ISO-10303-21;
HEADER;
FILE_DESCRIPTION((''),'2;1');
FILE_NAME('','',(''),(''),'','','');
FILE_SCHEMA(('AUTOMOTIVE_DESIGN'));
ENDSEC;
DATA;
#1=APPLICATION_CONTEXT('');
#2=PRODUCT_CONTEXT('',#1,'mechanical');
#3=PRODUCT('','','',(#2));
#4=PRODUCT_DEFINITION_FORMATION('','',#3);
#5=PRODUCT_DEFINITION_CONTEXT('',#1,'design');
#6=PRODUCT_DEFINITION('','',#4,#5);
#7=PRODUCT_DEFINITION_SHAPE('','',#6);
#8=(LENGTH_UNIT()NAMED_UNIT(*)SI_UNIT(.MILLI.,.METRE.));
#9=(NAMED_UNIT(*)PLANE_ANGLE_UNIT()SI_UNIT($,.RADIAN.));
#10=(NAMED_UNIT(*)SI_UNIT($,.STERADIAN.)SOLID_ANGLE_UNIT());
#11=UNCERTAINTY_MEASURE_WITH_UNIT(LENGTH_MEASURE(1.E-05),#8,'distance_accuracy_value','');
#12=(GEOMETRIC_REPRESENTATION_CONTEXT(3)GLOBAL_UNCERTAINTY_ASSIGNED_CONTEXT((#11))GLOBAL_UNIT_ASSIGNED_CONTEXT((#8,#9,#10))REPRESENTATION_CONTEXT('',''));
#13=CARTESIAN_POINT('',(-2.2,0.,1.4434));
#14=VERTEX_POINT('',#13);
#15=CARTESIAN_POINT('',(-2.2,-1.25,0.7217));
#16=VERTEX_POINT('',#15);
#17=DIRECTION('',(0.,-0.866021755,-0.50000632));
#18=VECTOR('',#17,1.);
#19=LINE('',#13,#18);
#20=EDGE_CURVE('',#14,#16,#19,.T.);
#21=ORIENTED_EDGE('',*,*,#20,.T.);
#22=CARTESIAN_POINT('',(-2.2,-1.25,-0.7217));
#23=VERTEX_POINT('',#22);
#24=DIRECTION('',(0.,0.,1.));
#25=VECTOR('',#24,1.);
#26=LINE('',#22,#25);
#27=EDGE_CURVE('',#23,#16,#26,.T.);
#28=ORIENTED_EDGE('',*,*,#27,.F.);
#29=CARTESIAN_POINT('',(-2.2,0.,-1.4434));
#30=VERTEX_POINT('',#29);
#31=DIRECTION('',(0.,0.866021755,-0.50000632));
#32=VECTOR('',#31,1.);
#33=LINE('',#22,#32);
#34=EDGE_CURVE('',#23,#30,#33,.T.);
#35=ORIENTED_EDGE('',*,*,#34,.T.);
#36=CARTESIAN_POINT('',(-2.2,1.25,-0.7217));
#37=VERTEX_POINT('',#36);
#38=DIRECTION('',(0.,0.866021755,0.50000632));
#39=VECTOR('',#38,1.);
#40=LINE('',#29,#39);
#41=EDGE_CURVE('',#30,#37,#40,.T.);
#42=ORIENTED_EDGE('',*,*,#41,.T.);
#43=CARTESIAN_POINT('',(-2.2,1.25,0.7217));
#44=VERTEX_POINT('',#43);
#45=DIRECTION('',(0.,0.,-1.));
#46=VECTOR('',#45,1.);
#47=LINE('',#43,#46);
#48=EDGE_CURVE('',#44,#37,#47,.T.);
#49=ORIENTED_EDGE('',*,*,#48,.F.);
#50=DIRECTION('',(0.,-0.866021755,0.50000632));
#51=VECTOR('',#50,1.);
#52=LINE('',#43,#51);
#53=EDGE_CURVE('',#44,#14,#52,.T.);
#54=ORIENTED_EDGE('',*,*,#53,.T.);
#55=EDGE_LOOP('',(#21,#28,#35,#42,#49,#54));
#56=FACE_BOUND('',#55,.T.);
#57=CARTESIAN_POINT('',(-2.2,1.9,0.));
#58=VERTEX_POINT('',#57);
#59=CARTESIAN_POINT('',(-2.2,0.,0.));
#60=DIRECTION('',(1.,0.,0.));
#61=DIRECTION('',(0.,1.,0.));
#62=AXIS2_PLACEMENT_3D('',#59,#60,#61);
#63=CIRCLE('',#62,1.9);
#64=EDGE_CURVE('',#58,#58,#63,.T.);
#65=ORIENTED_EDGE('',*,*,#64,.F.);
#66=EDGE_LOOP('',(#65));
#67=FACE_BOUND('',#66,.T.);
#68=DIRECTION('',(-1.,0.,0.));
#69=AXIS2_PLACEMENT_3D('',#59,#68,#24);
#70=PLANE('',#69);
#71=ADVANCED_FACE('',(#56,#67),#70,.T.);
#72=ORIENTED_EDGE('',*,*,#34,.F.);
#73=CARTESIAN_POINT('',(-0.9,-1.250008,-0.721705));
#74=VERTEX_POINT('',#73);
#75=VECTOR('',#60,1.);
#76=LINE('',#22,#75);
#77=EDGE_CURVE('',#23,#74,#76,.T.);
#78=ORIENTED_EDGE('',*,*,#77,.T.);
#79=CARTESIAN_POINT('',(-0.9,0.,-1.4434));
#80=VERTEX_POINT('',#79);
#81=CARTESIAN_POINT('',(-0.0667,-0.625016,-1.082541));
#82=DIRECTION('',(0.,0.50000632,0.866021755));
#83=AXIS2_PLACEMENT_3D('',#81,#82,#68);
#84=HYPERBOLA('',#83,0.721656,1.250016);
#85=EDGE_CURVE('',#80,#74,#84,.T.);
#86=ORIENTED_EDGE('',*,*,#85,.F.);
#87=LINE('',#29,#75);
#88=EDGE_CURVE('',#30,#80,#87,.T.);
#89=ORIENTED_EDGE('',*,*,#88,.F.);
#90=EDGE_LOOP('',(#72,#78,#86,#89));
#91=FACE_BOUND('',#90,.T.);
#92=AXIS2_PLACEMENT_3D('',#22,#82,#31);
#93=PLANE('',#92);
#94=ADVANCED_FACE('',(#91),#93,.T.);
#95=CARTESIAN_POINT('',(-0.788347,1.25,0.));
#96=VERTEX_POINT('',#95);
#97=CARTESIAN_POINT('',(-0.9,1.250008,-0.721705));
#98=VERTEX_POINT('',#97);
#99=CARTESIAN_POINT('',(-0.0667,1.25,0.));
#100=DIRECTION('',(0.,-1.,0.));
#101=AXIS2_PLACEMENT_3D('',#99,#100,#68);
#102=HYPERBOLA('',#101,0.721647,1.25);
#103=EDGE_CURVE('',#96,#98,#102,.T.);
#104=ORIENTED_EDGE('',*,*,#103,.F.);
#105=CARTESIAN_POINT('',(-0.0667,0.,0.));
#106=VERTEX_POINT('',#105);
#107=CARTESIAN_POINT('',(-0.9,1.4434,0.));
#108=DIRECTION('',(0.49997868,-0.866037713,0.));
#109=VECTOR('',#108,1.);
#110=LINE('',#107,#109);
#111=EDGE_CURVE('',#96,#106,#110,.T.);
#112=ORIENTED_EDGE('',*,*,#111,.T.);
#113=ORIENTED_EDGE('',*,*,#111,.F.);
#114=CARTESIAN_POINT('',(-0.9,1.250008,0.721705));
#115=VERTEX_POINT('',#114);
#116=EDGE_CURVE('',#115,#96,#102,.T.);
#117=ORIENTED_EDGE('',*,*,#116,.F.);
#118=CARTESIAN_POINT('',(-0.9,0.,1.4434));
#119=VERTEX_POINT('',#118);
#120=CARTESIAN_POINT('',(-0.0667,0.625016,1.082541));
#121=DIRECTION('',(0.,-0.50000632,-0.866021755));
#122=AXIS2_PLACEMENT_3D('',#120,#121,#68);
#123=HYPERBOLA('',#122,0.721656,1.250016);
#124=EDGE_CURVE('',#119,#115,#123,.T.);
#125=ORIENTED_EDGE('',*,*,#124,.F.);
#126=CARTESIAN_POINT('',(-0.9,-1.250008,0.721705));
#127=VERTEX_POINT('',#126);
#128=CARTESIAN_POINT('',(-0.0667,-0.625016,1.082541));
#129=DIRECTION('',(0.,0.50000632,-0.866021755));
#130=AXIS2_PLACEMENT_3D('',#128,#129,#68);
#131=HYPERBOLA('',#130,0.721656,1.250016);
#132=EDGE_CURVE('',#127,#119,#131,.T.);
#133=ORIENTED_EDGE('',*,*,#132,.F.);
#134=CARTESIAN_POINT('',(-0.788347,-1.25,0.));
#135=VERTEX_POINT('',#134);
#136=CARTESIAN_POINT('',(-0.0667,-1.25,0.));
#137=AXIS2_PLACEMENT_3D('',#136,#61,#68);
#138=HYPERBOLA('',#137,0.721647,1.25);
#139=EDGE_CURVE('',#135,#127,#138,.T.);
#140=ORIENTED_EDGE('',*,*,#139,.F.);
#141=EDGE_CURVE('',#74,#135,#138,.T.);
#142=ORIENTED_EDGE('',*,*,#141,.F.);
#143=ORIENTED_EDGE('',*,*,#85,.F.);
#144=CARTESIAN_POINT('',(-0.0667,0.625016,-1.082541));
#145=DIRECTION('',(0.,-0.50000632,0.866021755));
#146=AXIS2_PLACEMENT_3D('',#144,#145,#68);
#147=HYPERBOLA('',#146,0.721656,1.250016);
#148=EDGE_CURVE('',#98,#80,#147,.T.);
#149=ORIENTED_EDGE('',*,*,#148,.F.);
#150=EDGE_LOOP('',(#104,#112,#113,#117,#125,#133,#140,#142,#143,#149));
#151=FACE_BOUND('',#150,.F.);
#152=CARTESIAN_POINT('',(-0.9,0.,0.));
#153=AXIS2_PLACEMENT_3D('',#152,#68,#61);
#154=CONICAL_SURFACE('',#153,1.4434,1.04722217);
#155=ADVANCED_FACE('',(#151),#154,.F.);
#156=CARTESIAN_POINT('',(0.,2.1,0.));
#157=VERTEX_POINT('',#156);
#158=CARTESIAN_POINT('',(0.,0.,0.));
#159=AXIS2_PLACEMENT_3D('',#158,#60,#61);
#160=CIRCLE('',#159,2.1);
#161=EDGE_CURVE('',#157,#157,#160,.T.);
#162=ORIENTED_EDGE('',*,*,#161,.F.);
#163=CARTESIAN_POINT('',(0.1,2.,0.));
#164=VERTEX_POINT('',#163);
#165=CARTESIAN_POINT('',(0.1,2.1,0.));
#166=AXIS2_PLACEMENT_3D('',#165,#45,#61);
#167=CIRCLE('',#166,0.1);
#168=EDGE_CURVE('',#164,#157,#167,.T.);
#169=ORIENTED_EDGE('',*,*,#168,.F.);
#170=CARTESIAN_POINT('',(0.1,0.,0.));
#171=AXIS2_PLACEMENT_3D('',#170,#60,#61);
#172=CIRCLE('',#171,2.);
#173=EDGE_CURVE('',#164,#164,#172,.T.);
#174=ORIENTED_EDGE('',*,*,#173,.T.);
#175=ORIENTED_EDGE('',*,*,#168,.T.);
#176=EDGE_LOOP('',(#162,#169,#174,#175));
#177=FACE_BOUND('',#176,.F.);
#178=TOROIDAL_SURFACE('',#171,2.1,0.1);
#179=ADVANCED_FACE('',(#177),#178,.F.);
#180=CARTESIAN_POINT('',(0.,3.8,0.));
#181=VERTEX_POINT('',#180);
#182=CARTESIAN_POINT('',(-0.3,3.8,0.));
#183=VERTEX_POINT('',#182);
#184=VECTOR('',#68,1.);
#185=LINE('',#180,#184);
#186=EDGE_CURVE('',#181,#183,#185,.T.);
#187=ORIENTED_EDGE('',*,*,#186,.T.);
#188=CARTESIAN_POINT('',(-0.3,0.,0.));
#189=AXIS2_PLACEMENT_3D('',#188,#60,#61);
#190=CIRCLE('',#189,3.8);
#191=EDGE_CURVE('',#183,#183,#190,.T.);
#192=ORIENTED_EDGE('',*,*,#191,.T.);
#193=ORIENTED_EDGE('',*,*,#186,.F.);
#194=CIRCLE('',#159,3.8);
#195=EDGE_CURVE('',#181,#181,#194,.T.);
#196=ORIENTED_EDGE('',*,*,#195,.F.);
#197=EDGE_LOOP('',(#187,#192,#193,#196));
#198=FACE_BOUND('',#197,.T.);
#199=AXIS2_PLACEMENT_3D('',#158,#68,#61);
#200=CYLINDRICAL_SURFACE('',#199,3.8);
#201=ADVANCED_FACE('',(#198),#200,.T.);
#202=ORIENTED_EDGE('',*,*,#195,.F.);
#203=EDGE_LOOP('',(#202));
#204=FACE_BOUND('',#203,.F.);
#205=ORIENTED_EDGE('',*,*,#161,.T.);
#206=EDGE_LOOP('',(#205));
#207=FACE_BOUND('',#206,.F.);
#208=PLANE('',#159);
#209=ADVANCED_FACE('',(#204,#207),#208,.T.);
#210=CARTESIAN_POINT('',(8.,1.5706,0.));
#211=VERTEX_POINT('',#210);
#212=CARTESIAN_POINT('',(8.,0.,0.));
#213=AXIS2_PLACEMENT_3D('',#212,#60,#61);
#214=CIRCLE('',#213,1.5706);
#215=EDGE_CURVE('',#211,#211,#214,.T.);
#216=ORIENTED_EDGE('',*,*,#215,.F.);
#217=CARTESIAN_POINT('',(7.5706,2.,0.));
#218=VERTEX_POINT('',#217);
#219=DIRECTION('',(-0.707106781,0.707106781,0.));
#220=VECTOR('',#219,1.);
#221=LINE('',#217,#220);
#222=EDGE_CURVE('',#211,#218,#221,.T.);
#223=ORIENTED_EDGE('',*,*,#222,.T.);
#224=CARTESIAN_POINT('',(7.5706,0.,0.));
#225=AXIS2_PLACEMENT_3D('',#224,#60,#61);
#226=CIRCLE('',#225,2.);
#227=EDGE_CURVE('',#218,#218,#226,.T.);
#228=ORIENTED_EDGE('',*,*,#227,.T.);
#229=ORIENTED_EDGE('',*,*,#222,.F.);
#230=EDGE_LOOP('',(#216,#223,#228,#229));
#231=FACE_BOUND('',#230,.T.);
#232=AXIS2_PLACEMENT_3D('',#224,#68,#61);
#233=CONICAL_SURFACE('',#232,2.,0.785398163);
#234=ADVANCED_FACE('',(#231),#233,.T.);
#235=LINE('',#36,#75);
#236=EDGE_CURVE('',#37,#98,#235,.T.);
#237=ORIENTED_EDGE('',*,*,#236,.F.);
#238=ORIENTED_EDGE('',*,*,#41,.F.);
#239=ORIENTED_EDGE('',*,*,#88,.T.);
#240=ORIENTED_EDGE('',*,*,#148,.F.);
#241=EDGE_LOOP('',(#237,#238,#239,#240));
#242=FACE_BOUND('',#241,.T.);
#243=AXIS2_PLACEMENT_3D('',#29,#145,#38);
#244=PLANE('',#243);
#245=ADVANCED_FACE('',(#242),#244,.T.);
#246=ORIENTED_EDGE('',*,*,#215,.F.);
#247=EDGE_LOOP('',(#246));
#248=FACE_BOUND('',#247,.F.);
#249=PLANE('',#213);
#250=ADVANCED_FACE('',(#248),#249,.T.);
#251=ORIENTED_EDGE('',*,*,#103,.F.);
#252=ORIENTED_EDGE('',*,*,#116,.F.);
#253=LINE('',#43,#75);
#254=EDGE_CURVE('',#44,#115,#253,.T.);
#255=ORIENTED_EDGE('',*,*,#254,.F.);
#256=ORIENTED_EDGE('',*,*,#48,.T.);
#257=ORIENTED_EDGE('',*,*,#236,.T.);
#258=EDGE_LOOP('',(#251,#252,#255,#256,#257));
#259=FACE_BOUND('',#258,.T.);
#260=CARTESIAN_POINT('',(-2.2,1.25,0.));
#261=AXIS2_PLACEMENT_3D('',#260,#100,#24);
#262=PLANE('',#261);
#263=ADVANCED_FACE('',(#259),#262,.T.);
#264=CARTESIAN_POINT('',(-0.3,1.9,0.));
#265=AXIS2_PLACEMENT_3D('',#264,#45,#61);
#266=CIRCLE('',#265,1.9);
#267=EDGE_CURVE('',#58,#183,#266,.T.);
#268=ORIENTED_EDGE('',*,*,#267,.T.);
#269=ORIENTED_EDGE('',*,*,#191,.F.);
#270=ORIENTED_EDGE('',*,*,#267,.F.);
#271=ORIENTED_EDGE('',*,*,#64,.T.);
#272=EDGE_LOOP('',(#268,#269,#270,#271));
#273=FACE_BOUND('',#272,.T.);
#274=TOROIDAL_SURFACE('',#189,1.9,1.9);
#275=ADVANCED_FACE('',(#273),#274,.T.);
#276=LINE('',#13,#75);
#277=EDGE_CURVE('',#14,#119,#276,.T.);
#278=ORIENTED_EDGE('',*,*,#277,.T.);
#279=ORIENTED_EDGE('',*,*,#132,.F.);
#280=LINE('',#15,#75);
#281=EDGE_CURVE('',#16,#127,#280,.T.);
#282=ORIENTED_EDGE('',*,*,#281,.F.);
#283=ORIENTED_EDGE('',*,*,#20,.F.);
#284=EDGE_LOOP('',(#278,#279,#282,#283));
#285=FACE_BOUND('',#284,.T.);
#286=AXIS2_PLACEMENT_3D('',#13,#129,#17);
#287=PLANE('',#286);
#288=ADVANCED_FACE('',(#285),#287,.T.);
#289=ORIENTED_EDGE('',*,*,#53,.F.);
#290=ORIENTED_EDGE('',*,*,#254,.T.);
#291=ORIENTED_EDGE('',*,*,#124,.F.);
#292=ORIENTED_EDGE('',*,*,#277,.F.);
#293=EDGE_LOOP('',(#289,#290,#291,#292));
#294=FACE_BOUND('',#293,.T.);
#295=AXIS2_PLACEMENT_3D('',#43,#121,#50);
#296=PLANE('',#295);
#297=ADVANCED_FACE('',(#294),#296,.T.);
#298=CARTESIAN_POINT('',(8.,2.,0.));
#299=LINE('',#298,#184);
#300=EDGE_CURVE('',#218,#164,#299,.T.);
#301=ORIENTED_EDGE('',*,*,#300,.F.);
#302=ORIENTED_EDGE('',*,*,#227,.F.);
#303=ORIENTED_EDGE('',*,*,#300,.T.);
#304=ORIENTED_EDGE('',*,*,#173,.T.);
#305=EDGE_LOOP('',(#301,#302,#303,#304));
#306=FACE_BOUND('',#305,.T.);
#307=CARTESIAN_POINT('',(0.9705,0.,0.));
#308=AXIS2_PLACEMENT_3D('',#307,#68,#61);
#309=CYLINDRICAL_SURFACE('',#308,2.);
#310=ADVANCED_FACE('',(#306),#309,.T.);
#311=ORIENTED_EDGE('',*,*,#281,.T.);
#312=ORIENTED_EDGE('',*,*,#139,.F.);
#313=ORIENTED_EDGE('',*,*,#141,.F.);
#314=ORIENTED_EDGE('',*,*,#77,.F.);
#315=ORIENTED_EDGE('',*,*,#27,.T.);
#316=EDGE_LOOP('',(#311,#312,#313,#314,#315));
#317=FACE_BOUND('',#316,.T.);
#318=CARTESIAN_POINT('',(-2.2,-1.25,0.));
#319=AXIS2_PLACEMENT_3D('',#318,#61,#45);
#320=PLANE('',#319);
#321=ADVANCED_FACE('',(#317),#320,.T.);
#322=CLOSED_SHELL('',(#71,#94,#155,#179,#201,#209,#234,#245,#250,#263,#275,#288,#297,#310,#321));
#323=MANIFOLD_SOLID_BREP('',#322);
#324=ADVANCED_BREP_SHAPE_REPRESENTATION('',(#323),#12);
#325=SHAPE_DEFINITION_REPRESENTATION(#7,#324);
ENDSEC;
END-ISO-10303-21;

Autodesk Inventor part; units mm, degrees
ref_plane "YZ Plane" through (0, 0, 0) normal (1, 0, 0) x (0, 1, 0)
ref_plane "XZ Plane" through (0, 0, 0) normal (0, 1, 0) x (-1, 0, 0)
sketch "Sketch1" plane through (0, 0, 0) normal (0, 0, 1) x (1, 0, 0)
  line L0 (-0.0667, 0) -> (8, 0)
  line L1 (8, 0) -> (8, 2)
  line L2 (8, 2) -> (1.4, 2)
  line L3 (1.4, 2) -> (0.9705, 2)
  line L4 (0.9705, 2) -> (0, 2)
  line L5 (0, 2) -> (0, 3.8)
  line L6 (0, 3.8) -> (-2.2, 3.8)
  line L7 (-2.2, 3.8) -> (-2.2, 1.4434)
  line L8 (-2.2, 1.4434) -> (-0.9, 1.4434)
  line L9 (-0.9, 1.4434) -> (-0.0667, 0)
  line L10 (-4.24, 0) -> (10.04, 0) projected
  line L11 (0, -0.76) -> (0, 4.56) projected
  line L12 (1.4, 2) -> (0, 2) construction
  dimension "d1" = 6.6
  dimension "d2" = 0.4295
  dimension "d3" = 2.2
  dimension "d4" = 1.3
  dimension "d5" = 60
  dimension "d6" = 4
  dimension "d7" = 4
  dimension "d8" = 2.8868
  dimension "d9" = 7.6
  dimension "d26" = 8
revolve "Body" add sketch "Sketch1" angle 360 about axis through (-0.0667, 0, 0) along (1, 0, 0)
sketch "Sketch2" plane through (-2.2, 0, 0) normal (-1, 0, 0) x (0, 0, 1)
  circle A0 centre (0, 0) radius 1.4434 projected
  line L0 (0, -5.32) -> (0, 5.32) projected
  line L1 (-5.32, 0) -> (5.32, 0) projected
  line L2 (1.4434, 0) -> (0.7217, -1.25)
  line L3 (0.7217, -1.25) -> (-0.7217, -1.25)
  line L4 (-0.7217, -1.25) -> (-1.4434, 0)
  line L5 (-1.4434, 0) -> (-0.7217, 1.25)
  line L6 (-0.7217, 1.25) -> (0.7217, 1.25)
  line L7 (0.7217, 1.25) -> (1.4434, 0)
  point P0 (0, 0)
extrude "Slot" add sketch "Sketch2" against normal up to next contours L7 A0 | A0 L2 | L6 L0 A0 | A0 L0 L3 | L0 L6 A0 | A0 L3 L0 | L4 A0 | A0 L5
fillet "Fillet1" radius 1.9 1 edges at (-2.2, -3.8, 0)
thread "Thread" size "M4x0.7" class "6g" standard "ISO Metric profile" length 6.6
chamfer "Chamfer1" distance 0.4294 distance2 0.4294 1 edges at (8, -2, 0) measured on face at (8, 0.556, 0.0273)
ref_plane "Work Plane1" through (29, 0, 0) normal (0, -1, 0) x (1, 0, 0)
fillet "Fillet2" radius 0.1 1 edges at (0, -2, 0)
equation "\"d1\" = GEL"
equation "\"d3\" = KOH"
equation "\"d4\" = INTI"
equation "\"d6\" = GD"
equation "\"d7\" = BDM"
equation "\"d8\" = 1.1547 * SW"
equation "\"d9\" = KOD"
equation "\"d26\" = NLG"
equation "\"d30\" = R"
equation "\"d17\" = RR"
equation "\"d13\" = GEL"
equation "\"d15\" = -0.5 * SPD + 0.5 * GD"
equation "\"d16\" = GUL"
equation "\"GD\" = NND"
equation "\"NLG\" = 8"
equation "\"GEL\" = 6.6"
equation "\"KOD\" = 7.6"
equation "\"KOH\" = 2.2"
equation "\"INTI\" = 1.3"
equation "\"GAL\" = 0.61345 * PTC"
equation "\"GUL\" = 0.61345 * PTC"
equation "\"BDM\" = NND"
equation "\"SW\" = 2.5"
equation "\"RR\" = 1.9"
equation "\"SPD\" = NND - 1.2269 * PTC"
equation "\"R\" = 0.1"
equation "\"TOA\" = 30deg"
equation "\"GD1\" = THREADDIA - 1.2269 * PTC"
equation "\"THREADDIA\" = 4"
equation "\"PTC\" = 0.7"
equation "\"NND\" = 4"
equation "\"KOH1\" = 0.3"
equation "\"E0\" = 1.155 * SW"
properties part number "BS 4168 - M4 x 8" material "Steel, Mild"
